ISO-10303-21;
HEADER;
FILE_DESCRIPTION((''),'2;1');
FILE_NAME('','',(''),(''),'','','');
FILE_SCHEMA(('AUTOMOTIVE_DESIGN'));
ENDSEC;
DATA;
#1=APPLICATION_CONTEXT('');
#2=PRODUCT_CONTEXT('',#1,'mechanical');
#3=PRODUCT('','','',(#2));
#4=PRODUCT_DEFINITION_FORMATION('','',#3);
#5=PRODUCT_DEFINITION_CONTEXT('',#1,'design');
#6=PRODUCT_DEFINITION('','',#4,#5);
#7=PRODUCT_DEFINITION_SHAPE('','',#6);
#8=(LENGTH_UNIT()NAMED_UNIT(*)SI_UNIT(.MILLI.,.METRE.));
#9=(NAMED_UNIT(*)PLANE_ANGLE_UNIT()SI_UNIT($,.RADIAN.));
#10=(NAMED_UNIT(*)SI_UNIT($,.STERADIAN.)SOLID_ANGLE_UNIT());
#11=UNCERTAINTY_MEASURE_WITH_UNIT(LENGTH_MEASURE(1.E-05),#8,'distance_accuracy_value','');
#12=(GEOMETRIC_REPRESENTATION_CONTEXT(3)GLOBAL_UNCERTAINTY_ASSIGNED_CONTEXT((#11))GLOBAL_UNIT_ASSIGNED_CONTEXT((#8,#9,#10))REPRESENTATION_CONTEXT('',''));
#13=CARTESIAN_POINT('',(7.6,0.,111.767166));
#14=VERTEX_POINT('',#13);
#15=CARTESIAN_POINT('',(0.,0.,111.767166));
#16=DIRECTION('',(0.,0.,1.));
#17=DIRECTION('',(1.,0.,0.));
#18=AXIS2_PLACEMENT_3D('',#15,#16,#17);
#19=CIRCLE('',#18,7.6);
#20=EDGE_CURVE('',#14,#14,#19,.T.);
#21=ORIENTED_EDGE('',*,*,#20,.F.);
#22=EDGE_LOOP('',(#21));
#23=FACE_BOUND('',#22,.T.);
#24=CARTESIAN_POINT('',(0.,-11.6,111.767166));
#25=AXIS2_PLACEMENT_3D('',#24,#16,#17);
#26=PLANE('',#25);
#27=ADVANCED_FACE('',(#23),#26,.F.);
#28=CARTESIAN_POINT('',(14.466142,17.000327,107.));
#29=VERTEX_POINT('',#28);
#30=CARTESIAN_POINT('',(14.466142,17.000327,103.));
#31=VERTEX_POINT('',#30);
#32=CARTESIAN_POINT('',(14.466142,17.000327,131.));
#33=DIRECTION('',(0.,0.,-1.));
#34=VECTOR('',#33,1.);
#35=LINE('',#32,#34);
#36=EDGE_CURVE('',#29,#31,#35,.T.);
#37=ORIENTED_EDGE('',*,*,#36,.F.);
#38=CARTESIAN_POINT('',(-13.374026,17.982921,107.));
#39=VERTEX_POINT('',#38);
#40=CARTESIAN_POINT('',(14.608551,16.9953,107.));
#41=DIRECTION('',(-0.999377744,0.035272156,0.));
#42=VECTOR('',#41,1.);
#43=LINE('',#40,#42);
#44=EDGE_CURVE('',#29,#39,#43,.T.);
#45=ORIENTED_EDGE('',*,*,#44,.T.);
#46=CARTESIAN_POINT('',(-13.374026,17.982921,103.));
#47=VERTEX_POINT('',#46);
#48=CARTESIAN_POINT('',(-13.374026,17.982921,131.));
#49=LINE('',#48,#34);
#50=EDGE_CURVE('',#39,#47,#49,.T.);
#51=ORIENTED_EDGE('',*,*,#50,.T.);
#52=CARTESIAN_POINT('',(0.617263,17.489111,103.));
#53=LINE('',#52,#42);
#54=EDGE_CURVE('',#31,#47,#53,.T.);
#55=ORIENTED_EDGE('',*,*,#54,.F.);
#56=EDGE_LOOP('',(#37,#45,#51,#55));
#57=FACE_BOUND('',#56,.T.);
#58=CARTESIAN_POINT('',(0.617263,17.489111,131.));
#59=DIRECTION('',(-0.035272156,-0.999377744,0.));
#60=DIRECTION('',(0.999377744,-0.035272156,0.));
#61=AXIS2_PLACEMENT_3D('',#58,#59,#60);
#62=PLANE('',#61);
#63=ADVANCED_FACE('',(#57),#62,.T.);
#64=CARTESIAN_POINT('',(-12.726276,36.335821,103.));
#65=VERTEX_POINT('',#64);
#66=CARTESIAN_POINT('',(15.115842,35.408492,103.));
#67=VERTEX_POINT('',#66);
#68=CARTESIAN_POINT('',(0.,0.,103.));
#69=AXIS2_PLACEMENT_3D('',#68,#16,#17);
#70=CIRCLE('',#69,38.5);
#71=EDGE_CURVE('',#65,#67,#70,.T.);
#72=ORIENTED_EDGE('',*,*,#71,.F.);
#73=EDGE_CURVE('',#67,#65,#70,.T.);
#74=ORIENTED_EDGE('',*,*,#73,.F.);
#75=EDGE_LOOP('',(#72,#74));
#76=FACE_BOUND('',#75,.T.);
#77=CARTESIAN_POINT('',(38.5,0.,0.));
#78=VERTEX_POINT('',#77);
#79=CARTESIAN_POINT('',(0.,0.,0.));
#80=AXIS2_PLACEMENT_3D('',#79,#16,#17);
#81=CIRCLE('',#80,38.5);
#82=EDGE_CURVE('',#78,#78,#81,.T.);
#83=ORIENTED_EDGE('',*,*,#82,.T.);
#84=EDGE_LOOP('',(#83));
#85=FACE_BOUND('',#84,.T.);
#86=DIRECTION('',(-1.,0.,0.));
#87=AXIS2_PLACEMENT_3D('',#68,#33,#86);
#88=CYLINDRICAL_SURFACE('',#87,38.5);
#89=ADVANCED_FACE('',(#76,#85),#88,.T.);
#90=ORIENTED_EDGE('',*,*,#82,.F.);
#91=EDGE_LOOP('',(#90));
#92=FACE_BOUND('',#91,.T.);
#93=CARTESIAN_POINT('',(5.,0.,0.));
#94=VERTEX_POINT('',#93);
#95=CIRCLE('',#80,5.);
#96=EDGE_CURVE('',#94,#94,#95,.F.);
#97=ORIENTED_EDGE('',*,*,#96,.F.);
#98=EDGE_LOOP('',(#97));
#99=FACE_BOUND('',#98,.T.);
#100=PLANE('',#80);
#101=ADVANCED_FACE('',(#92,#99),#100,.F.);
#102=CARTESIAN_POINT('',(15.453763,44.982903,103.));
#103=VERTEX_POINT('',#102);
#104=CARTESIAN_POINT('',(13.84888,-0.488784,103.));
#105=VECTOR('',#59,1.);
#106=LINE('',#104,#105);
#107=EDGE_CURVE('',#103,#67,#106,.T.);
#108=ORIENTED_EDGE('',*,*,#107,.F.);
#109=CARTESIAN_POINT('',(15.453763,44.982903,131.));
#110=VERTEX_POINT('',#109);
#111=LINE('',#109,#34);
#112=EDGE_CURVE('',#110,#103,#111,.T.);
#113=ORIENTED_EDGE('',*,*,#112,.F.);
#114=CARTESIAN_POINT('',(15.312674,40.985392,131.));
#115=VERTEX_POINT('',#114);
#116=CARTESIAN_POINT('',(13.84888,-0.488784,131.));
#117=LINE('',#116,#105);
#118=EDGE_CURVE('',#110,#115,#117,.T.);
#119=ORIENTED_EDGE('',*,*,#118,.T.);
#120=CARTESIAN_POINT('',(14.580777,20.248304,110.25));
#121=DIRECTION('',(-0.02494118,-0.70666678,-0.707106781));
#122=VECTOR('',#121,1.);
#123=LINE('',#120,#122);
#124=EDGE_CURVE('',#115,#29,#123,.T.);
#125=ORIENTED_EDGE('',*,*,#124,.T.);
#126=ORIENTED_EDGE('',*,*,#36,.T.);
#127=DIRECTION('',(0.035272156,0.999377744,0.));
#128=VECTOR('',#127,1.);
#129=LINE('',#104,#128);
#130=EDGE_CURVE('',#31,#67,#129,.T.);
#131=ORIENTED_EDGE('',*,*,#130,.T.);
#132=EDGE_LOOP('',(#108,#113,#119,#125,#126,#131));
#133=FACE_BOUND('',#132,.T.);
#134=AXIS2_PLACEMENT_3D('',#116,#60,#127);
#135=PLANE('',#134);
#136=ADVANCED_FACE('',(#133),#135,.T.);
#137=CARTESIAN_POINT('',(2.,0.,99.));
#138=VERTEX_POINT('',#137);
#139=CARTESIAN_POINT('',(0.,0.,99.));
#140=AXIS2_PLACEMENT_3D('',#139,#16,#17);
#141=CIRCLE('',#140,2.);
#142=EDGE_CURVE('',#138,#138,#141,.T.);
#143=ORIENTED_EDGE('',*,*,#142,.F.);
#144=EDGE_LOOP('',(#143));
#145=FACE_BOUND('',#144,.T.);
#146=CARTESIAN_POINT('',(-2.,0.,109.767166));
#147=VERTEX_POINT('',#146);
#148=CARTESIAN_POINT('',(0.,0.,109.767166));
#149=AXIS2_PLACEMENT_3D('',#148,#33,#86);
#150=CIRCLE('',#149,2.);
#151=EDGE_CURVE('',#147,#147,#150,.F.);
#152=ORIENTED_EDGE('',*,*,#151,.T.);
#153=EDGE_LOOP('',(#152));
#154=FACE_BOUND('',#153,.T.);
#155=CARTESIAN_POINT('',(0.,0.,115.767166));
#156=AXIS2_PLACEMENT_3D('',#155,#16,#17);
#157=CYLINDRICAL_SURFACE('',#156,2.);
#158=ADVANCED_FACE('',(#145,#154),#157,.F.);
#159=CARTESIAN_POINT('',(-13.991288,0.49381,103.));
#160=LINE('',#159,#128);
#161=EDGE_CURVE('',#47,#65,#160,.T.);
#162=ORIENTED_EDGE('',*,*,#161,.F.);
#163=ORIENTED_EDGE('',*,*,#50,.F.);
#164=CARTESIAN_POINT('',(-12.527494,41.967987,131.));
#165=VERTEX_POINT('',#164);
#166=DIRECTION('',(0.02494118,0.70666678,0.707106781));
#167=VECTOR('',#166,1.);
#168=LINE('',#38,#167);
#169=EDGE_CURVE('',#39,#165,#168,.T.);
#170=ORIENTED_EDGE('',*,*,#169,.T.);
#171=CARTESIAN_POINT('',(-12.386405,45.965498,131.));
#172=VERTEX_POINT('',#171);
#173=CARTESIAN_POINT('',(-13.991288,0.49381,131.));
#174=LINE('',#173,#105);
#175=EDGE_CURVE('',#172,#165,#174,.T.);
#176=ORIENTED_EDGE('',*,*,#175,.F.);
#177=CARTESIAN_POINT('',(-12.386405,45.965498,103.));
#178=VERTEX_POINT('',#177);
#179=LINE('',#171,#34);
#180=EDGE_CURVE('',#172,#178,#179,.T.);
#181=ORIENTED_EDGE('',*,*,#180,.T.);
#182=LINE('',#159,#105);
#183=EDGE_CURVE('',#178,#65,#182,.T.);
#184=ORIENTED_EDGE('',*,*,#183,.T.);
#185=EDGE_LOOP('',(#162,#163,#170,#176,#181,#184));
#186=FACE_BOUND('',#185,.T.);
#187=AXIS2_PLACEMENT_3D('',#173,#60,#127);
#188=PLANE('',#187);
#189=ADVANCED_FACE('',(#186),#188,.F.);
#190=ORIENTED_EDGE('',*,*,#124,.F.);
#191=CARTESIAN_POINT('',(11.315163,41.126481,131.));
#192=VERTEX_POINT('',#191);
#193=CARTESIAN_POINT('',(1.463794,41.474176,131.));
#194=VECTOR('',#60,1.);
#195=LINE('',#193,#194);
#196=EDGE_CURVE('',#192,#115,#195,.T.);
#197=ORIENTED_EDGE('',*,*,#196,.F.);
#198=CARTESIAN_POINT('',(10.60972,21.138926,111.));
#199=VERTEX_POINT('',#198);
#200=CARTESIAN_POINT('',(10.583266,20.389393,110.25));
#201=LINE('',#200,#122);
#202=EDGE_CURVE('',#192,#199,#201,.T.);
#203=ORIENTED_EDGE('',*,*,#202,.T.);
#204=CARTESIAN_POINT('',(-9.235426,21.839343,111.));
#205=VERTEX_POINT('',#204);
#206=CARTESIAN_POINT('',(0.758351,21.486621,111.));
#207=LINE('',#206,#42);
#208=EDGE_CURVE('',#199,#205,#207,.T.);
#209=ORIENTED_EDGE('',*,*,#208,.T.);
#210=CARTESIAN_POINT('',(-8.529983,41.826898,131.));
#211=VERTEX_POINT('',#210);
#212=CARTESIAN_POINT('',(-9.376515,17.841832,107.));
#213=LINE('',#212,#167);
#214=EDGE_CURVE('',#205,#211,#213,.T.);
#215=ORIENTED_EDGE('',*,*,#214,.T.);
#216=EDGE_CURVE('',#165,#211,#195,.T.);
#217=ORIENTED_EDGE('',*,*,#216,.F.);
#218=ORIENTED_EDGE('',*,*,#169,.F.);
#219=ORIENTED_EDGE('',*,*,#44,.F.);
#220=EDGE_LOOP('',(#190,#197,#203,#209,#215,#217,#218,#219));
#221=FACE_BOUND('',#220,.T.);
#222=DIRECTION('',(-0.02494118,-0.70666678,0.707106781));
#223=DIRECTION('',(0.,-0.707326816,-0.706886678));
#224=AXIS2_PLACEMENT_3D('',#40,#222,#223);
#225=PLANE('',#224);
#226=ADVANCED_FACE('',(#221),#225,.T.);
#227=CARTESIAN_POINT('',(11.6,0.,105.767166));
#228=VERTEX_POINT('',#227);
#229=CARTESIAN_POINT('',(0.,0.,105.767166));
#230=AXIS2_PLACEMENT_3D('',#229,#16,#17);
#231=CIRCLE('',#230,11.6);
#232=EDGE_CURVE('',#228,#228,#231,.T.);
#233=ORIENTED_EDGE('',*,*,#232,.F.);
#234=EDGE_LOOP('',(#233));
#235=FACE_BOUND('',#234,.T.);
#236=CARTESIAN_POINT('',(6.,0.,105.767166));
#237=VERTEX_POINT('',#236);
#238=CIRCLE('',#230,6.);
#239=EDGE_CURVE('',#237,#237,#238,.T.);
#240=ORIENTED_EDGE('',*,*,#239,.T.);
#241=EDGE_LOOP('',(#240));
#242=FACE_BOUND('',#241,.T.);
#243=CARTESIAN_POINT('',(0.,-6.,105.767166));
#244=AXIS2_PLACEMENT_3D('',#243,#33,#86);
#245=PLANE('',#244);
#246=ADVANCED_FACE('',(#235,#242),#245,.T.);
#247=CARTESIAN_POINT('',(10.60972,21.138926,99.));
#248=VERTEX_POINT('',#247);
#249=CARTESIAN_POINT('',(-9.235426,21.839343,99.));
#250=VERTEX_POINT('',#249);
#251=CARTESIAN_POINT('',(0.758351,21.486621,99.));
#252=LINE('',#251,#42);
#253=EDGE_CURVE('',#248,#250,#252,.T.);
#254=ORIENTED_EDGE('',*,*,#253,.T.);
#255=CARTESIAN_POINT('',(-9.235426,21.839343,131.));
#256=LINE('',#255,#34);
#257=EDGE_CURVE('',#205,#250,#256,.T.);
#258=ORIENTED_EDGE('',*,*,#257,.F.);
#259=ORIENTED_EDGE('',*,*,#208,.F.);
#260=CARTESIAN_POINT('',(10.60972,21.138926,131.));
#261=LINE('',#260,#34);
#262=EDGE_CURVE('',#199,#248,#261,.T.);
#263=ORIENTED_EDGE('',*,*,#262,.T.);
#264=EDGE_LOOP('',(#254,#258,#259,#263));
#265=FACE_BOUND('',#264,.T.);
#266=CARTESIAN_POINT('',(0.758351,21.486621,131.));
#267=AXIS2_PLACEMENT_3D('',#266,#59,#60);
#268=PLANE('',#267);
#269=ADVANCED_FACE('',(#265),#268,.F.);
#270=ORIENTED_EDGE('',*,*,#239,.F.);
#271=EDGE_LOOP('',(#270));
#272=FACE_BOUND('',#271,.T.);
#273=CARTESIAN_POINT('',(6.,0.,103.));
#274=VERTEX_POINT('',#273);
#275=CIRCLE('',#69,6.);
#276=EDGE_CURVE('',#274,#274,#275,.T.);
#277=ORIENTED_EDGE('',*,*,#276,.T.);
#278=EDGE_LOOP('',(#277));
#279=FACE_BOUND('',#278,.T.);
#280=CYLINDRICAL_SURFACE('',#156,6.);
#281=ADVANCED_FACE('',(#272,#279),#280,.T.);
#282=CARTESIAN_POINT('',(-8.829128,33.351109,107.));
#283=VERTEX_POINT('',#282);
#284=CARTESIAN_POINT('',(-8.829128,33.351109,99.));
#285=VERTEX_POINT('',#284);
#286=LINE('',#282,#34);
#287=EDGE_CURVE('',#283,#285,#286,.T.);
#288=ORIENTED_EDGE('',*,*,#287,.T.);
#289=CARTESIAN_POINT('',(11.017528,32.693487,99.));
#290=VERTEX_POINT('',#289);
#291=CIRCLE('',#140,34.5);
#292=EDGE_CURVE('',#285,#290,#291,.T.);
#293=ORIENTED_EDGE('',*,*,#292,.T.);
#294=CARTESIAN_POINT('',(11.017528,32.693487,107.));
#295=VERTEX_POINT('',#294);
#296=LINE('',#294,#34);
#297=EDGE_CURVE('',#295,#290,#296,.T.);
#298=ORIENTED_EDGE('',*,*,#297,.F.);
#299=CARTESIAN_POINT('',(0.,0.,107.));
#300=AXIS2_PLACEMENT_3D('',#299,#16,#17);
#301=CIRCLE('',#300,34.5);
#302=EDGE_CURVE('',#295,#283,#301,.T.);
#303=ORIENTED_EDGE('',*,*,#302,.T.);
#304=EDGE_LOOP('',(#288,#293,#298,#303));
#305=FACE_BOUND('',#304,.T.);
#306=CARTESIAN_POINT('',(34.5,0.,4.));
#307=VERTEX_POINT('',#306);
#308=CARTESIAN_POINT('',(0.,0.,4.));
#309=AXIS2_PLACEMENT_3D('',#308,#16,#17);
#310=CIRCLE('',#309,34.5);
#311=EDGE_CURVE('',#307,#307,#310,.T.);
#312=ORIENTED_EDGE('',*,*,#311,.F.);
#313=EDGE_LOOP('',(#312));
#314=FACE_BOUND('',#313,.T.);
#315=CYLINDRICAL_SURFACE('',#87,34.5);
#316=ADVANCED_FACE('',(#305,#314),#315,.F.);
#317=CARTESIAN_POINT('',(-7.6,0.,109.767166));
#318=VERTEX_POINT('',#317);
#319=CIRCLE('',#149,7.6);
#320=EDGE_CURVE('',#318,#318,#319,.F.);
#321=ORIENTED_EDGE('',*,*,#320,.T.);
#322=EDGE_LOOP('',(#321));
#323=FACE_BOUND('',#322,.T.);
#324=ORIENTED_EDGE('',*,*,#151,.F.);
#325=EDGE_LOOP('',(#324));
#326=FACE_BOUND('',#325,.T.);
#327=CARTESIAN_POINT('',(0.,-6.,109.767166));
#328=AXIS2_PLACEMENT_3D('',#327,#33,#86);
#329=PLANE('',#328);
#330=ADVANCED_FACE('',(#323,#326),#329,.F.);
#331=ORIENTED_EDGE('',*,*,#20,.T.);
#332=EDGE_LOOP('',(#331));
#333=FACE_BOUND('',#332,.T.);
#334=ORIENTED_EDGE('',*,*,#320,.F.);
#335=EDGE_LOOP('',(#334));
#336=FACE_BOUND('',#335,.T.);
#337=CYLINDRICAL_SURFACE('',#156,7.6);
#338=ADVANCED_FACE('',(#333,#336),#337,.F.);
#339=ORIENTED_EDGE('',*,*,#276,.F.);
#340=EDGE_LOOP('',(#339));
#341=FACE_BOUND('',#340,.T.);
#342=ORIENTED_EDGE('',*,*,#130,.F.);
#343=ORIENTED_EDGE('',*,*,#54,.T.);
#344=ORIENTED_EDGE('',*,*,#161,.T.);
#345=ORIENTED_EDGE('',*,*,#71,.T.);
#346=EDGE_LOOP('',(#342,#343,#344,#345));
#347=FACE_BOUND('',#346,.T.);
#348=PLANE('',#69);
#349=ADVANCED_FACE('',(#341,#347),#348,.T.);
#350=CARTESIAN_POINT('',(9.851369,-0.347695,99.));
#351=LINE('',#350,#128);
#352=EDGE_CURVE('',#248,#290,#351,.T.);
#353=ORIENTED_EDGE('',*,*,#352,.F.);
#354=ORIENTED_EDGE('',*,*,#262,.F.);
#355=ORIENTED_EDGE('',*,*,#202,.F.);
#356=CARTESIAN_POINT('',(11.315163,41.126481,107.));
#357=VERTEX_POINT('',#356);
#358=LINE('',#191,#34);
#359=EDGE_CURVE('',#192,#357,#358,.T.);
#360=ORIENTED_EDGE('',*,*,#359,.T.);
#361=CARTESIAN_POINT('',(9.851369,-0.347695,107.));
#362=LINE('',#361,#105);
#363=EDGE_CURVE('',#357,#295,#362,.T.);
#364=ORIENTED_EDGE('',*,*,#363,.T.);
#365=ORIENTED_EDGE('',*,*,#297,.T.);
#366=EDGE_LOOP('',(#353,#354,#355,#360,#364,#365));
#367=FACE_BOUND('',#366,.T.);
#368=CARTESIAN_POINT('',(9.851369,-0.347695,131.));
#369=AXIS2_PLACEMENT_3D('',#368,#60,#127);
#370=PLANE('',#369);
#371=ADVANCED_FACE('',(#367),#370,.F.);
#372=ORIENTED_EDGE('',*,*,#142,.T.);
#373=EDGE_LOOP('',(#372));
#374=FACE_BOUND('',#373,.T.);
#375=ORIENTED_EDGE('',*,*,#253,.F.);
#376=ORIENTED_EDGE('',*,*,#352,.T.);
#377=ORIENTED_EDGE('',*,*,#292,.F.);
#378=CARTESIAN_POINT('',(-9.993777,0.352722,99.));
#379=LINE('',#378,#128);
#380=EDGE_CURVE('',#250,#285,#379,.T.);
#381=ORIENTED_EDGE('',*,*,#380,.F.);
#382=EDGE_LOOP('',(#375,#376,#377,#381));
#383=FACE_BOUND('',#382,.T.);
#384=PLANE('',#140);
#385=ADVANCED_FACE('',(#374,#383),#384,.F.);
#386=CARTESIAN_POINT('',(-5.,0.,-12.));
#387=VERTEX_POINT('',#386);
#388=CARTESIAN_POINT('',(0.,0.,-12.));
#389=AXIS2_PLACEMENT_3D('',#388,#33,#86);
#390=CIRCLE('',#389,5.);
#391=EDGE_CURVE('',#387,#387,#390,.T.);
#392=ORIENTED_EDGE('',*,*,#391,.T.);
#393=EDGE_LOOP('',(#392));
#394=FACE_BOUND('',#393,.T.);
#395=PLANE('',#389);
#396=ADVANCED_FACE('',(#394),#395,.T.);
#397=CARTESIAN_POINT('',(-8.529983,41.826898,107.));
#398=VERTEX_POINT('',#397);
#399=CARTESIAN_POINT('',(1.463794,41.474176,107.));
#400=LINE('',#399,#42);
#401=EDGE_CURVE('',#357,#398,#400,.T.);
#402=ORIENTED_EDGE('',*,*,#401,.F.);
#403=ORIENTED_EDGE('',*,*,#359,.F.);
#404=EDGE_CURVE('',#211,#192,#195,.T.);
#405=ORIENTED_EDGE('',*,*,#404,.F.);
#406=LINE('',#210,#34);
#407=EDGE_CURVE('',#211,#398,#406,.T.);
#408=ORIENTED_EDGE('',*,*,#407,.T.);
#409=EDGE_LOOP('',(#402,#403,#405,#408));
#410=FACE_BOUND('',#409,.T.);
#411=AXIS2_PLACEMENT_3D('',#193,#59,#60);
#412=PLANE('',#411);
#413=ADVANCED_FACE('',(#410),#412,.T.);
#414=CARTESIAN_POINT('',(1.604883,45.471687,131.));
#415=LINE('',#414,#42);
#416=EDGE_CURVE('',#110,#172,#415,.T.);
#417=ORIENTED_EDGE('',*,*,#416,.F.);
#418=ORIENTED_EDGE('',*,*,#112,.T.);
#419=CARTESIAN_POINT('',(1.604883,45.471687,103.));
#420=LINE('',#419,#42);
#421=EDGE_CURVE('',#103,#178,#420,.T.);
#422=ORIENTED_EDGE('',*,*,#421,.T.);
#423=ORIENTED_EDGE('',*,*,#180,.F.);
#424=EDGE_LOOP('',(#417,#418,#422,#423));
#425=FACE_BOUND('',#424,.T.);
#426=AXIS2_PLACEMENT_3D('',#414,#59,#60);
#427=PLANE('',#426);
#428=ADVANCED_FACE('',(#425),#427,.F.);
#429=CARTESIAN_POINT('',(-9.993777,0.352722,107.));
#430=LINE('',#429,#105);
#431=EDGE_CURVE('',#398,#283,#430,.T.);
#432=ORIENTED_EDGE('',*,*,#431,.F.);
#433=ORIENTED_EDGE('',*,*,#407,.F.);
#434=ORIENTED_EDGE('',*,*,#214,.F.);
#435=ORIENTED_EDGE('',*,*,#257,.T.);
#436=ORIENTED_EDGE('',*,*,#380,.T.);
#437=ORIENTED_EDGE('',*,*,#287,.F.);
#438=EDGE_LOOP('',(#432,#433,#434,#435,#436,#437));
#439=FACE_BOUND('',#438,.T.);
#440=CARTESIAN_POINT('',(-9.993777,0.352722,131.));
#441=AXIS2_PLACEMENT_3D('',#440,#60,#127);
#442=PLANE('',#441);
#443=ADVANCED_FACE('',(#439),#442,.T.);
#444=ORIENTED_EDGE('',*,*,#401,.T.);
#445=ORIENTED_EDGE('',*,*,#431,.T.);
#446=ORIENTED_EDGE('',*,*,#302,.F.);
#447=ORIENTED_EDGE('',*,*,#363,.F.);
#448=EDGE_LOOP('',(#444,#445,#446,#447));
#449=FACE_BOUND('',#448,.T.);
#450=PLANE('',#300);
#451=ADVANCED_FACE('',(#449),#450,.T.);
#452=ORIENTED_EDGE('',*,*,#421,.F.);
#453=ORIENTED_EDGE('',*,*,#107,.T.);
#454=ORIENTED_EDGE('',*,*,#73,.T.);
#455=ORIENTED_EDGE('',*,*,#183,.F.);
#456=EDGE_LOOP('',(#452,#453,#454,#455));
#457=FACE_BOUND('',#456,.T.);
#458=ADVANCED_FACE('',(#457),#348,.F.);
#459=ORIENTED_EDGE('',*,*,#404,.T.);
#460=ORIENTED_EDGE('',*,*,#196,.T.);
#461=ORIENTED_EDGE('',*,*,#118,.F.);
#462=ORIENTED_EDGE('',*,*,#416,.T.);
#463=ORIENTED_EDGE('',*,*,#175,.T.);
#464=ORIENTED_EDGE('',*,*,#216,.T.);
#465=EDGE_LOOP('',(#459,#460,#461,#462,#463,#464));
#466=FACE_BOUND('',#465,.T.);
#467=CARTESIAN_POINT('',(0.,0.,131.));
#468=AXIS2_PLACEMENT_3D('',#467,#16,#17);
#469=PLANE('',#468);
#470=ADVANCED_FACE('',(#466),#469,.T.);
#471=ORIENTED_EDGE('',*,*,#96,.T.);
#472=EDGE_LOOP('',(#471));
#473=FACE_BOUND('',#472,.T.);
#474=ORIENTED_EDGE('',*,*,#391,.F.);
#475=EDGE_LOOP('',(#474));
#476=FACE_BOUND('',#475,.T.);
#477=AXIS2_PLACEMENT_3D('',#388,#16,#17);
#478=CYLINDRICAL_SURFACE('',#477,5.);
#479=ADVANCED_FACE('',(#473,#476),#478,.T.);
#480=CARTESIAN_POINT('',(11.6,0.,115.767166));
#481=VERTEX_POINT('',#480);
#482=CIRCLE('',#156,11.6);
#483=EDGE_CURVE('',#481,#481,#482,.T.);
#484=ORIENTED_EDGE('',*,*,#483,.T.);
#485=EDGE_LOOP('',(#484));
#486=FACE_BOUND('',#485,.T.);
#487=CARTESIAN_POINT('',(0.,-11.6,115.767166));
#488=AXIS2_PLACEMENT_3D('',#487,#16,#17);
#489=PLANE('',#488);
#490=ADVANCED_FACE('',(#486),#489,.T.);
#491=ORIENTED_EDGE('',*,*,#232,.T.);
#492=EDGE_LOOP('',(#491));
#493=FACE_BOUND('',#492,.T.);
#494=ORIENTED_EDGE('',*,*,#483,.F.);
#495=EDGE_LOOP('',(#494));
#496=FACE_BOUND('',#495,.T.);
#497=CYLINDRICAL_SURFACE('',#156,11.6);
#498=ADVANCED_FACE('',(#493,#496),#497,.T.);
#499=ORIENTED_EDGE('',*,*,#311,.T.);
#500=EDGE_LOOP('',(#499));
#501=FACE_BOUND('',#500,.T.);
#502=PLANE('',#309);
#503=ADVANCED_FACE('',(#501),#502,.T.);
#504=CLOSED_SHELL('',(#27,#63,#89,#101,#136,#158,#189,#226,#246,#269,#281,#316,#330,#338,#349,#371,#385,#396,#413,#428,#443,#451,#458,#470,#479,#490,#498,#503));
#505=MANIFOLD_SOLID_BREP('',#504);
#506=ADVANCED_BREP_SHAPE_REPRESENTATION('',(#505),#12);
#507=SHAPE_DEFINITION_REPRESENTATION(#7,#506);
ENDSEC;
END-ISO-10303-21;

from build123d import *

# Parameters (mm, degrees)
SKETCH1_R            = 38.5
BOSS_EXTRUDE1_DEPTH  = 103
BOSS_EXTRUDE2_DEPTH  = 28
CUT_EXTRUDE1_DEPTH   = 28
SHELL2_START         = 4
SHELL2_OUTLINE_R     = 34.5
SHELL2_DEPTH         = 95
SHELL2_START_2       = 107
SHELL2_2_DEPTH       = 24
SHELL2_START_3       = 99
SHELL2_3_OUTLINE_R   = 2
SHELL2_3_DEPTH       = 12.767166294
SHELL2_START_4       = 109.767166294
SHELL2_4_OUTLINE_R   = 7.6
SHELL2_4_OUTLINE_R_2 = 2
SHELL2_4_DEPTH       = 2
SKETCH6_R            = 5
BOSS_EXTRUDE3_DEPTH  = 12


# Read off the part's stored shape, not the designer's step: Shell2
with BuildPart() as part:
    # Sketch1 → Boss-Extrude1 (new body)
    with BuildSketch(Plane.XY):
        Circle(SKETCH1_R)
    extrude(amount=BOSS_EXTRUDE1_DEPTH)

    # Sketch3 → Revolve1 (revolve)
    with BuildSketch(Plane(origin=(0, 0, 0), x_dir=(0, 0, -1), z_dir=(1, 0, 0)), mode=Mode.PRIVATE) as revolve1_sk:
        Polygon((-103, 0), (-103, -6), (-105.767166294, -6), (-105.767166294, -11.6), (-115.767166294, -11.6), (-115.767166294, 0), align=None)
    revolve(revolve1_sk.sketch.rotate(Axis((0, 0, 115.767166294), (0, 0, -1)), 270), axis=Axis((0, 0, 115.767166294), (0, 0, -1)))

    # Sketch4 → Boss-Extrude2 (add)
    with BuildSketch(Plane.XY.offset(103)):
        with BuildLine():
            Line((14.466142326, 17.000326533), (15.115842287, 35.408492088))
            ThreePointArc((15.115842287, 35.408492088), (1.281597128, 38.478663033), (-12.726276266, 36.335821064))
            Line((-12.726276266, 36.335821064), (-13.374025691, 17.982920698))
            Line((-13.374025691, 17.982920698), (0.617262695, 17.48911052))
            Line((0.617262695, 17.48911052), (14.466142326, 17.000326533))
        make_face()
        with BuildLine():
            Line((15.115842287, 35.408492088), (15.453762685, 44.982903362))
            Line((15.453762685, 44.982903362), (-12.386405332, 45.965497528))
            Line((-12.386405332, 45.965497528), (-12.726276266, 36.335821064))
            ThreePointArc((-12.726276266, 36.335821064), (1.281597128, 38.478663033), (15.115842287, 35.408492088))
        make_face()
    extrude(amount=BOSS_EXTRUDE2_DEPTH)

    # Sketch5 → Cut-Extrude1 (cut)
    with BuildSketch(Plane(origin=(-13.991288415, 0.493810179, 0), x_dir=(0, 0, 1), z_dir=(-0.9993777439159626, 0.03527215566762106, 0))):
        Polygon((107, 17.5), (131, 41.5), (131, 17.5), align=None)
    extrude(amount=-CUT_EXTRUDE1_DEPTH, mode=Mode.SUBTRACT)

    # Shell2 outline → Shell2 (cut)
    with BuildSketch(Plane.XY.offset(SHELL2_START)):
        Circle(SHELL2_OUTLINE_R)
    extrude(amount=SHELL2_DEPTH, mode=Mode.SUBTRACT)

    # Shell2 2 outline → Shell2 2 (cut)
    with BuildSketch(Plane.XY.offset(SHELL2_START_2)):
        Polygon((-9.235426092, 21.839343051), (10.609719973, 21.138926131), (11.315163087, 41.126481009), (-8.529982979, 41.826897929), align=None)
    extrude(amount=SHELL2_2_DEPTH, mode=Mode.SUBTRACT)

    # Shell2 3 outline → Shell2 3 (cut)
    with BuildSketch(Plane.XY.offset(SHELL2_START_3)):
        with BuildLine():
            Line((-9.235426092, 21.839343051), (10.609719973, 21.138926131))
            Line((10.609719973, 21.138926131), (11.017527996, 32.693486765))
            ThreePointArc((11.017527996, 32.693486765), (1.142536641, 34.481076115), (-8.82912846, 33.351109286))
            Line((-8.82912846, 33.351109286), (-9.235426092, 21.839343051))
        make_face()
        Circle(SHELL2_3_OUTLINE_R)
    extrude(amount=SHELL2_3_DEPTH, mode=Mode.SUBTRACT)

    # Shell2 4 outline → Shell2 4 (cut)
    with BuildSketch(Plane.XY.offset(SHELL2_START_4)):
        Circle(SHELL2_4_OUTLINE_R)
        Circle(SHELL2_4_OUTLINE_R_2, mode=Mode.SUBTRACT)
    extrude(amount=SHELL2_4_DEPTH, mode=Mode.SUBTRACT)

    # Sketch6 → Boss-Extrude3 (add)
    with BuildSketch(Plane(origin=(0, 0, 0), x_dir=(-1, 0, 0), z_dir=(0, 0, -1))):
        with Locations(Location((0, 0, 0), (0, 0, 180))):
            Circle(SKETCH6_R)
    extrude(amount=BOSS_EXTRUDE3_DEPTH)


solid = part.part
